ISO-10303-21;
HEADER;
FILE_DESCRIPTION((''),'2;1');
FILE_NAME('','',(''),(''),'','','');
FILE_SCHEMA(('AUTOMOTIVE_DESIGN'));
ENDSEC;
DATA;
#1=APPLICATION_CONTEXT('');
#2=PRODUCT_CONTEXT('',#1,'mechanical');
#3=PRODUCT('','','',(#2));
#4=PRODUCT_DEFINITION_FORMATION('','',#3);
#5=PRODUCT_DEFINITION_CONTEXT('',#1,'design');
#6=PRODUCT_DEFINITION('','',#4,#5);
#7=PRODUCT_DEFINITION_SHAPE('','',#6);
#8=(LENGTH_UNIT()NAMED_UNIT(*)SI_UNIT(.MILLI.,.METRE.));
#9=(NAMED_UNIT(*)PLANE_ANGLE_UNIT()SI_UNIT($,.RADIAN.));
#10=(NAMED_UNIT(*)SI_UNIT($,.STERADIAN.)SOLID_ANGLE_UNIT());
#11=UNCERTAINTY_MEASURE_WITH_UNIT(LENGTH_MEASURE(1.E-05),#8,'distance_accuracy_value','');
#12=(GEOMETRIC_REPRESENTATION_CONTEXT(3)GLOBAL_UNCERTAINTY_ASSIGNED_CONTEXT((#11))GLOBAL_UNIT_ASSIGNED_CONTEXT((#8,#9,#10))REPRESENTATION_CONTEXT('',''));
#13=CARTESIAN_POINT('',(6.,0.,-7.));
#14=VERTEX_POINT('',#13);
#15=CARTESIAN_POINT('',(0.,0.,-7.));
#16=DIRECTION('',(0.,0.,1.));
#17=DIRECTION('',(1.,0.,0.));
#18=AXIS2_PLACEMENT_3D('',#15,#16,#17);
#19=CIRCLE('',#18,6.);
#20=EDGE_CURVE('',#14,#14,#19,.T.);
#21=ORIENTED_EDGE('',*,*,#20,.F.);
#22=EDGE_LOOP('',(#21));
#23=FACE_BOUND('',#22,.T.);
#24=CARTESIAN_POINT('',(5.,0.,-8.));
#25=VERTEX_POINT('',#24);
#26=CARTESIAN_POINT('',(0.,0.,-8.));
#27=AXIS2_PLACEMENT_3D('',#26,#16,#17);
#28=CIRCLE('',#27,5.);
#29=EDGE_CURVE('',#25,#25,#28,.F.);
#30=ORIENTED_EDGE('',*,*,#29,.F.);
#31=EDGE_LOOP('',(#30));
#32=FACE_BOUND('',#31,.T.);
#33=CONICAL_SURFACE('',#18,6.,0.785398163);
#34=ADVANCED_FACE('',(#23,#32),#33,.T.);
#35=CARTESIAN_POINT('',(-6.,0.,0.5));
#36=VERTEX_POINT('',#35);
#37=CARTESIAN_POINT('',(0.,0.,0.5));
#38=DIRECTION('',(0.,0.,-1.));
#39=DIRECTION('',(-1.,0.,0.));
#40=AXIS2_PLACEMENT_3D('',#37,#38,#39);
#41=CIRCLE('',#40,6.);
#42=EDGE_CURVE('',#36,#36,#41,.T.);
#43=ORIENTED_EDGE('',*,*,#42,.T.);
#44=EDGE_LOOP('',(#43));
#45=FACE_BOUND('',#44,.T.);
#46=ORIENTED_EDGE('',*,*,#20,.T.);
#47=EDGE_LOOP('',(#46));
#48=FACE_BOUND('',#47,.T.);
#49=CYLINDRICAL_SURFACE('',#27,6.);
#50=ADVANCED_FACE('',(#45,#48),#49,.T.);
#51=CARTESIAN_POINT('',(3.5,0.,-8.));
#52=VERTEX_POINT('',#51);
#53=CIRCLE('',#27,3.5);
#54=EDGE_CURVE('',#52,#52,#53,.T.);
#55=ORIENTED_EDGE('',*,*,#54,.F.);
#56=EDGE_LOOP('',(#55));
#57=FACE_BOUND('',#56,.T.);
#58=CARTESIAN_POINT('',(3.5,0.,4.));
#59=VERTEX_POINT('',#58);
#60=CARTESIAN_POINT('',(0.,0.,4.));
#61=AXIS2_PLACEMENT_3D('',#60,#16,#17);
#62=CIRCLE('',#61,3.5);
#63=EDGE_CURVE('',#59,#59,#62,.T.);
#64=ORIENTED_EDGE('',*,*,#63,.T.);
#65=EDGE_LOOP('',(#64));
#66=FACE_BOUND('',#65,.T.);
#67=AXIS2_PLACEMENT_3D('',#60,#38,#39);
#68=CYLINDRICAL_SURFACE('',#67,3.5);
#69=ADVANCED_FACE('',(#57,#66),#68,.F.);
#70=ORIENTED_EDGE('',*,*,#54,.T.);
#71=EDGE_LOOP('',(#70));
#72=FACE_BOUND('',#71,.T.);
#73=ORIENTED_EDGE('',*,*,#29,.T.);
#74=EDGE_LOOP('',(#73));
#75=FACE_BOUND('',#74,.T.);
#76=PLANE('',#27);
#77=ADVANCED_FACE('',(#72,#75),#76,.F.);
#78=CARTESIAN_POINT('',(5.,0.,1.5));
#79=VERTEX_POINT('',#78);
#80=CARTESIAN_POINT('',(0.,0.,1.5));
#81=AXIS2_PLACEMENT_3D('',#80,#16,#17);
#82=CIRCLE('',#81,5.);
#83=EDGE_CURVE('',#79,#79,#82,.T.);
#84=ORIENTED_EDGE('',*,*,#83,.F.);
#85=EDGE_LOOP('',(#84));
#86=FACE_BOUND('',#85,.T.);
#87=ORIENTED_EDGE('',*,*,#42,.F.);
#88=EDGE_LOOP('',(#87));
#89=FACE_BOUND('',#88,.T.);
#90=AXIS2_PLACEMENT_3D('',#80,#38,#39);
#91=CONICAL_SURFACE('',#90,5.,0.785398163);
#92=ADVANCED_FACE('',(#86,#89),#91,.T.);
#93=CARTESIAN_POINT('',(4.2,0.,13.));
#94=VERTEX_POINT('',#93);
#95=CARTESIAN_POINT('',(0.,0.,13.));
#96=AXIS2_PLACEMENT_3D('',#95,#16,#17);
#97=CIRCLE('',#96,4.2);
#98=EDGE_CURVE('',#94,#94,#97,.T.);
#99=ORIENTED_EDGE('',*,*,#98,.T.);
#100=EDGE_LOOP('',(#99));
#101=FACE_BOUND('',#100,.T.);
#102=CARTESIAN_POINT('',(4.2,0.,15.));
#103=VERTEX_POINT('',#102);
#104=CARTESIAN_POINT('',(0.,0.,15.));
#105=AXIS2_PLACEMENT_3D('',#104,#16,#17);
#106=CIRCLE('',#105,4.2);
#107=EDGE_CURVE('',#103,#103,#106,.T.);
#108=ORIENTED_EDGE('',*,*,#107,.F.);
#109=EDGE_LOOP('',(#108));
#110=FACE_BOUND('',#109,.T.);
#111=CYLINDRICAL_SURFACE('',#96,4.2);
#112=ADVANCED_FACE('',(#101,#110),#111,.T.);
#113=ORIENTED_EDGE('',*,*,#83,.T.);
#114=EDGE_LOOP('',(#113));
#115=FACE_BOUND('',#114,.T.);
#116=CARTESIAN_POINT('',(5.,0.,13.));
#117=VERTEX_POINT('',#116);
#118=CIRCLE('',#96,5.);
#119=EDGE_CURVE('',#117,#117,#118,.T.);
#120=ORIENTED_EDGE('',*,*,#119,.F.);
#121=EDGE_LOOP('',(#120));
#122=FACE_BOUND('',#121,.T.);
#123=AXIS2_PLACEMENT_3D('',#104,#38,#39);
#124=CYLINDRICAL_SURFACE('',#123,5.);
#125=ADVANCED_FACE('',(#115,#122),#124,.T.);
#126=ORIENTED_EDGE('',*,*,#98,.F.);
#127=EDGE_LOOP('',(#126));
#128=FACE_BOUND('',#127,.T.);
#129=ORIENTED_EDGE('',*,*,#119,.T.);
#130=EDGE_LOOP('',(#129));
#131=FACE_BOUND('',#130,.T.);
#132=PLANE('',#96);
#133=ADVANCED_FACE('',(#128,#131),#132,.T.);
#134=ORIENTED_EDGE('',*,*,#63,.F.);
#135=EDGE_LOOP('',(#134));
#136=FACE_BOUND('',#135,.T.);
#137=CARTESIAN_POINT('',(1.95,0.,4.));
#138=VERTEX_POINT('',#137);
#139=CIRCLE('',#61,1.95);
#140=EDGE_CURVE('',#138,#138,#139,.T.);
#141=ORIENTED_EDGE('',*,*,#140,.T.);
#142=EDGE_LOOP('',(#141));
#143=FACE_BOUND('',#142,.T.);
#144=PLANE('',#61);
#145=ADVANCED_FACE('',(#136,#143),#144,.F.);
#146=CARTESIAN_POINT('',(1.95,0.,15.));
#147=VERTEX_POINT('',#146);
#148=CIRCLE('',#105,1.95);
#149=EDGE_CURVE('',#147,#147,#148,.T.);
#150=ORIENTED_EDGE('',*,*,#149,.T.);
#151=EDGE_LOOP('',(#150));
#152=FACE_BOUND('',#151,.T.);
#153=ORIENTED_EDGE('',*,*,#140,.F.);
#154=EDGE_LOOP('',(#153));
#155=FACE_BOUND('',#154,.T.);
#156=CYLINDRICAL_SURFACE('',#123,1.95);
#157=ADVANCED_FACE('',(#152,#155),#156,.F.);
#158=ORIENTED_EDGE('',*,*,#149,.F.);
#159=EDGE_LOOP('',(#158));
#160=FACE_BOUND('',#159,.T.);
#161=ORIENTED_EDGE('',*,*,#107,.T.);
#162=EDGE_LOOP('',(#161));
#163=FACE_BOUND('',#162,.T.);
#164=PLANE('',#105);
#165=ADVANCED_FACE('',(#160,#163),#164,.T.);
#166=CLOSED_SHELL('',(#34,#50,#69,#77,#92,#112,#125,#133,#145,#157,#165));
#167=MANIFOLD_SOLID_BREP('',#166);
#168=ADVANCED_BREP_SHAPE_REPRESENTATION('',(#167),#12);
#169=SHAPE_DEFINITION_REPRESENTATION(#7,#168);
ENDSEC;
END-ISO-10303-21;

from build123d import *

# Parameters (mm, degrees)
SKETCH_1_R          = 5
SKETCH_1_R_2        = 1.95
EXTRUDE_1_DEPTH     = 15
SKETCH_3_R          = 3.5
CUT_EXTRUDE_1_DEPTH = 4
EXTRUDE_START       = -8
SKETCH_4_R          = 6
SKETCH_4_R_2        = 3.5
EXTRUDE_2_DEPTH     = 8
CHAMFER_1_SIZE      = 1.5
CHAMFER_2_SIZE      = 1
CUT_EXTRUDE_START   = -2
SKETCH_9_R          = 5
SKETCH_9_R_2        = 4.2
CUT_EXTRUDE_4_DEPTH = 2


with BuildPart() as part:
    # 스케치1 → 보스-돌출1 (new body)
    with BuildSketch(Plane.XY):
        Circle(SKETCH_1_R)
        Circle(SKETCH_1_R_2, mode=Mode.SUBTRACT)
    extrude(amount=EXTRUDE_1_DEPTH)

    # 스케치3 → 컷-돌출1 (cut)
    with BuildSketch(Plane.XY):
        Circle(SKETCH_3_R)
    extrude(amount=CUT_EXTRUDE_1_DEPTH, mode=Mode.SUBTRACT)

    # 스케치4 → 보스-돌출2 (add)
    with BuildSketch(Plane.XY.offset(EXTRUDE_START)):
        Circle(SKETCH_4_R)
        Circle(SKETCH_4_R_2, mode=Mode.SUBTRACT)
    extrude(amount=EXTRUDE_2_DEPTH)

    # 모따기1
    # the kernel refuses this chamfer: 1.5 mm, written as the material it adds along each edge
    with BuildSketch(Plane(origin=(0, 0, 0), x_dir=(1, 0, 0), z_dir=(0, -1, 0))) as chamfer_1_piece_1_section:
        Polygon((5, CHAMFER_1_SIZE), (5 + CHAMFER_1_SIZE, 0), (5, 0), align=None)
    chamfer_1_piece_1 = revolve(axis=Axis((0, 0, 0), (0, 0, 1)), mode=Mode.PRIVATE)
    chamfer_1_piece_1 = chamfer_1_piece_1 & Plane(origin=(0, 0, 0.997696527), x_dir=(1, 0, 0), z_dir=(0, 0, -1)) * Cylinder(6, 26, mode=Mode.PRIVATE)
    add(chamfer_1_piece_1)

    # 모따기2
    chamfer_2_edges = [part.edges().sort_by_distance(p)[0] for p in [
        (-6, 0, -8),
    ]]
    chamfer(chamfer_2_edges, length=CHAMFER_2_SIZE)

    # 스케치9 → 컷-돌출4 (cut)
    with BuildSketch(Plane.XY.offset(15).offset(CUT_EXTRUDE_START)):
        Circle(SKETCH_9_R)
        Circle(SKETCH_9_R_2, mode=Mode.SUBTRACT)
    extrude(amount=CUT_EXTRUDE_4_DEPTH, mode=Mode.SUBTRACT)


solid = part.part
